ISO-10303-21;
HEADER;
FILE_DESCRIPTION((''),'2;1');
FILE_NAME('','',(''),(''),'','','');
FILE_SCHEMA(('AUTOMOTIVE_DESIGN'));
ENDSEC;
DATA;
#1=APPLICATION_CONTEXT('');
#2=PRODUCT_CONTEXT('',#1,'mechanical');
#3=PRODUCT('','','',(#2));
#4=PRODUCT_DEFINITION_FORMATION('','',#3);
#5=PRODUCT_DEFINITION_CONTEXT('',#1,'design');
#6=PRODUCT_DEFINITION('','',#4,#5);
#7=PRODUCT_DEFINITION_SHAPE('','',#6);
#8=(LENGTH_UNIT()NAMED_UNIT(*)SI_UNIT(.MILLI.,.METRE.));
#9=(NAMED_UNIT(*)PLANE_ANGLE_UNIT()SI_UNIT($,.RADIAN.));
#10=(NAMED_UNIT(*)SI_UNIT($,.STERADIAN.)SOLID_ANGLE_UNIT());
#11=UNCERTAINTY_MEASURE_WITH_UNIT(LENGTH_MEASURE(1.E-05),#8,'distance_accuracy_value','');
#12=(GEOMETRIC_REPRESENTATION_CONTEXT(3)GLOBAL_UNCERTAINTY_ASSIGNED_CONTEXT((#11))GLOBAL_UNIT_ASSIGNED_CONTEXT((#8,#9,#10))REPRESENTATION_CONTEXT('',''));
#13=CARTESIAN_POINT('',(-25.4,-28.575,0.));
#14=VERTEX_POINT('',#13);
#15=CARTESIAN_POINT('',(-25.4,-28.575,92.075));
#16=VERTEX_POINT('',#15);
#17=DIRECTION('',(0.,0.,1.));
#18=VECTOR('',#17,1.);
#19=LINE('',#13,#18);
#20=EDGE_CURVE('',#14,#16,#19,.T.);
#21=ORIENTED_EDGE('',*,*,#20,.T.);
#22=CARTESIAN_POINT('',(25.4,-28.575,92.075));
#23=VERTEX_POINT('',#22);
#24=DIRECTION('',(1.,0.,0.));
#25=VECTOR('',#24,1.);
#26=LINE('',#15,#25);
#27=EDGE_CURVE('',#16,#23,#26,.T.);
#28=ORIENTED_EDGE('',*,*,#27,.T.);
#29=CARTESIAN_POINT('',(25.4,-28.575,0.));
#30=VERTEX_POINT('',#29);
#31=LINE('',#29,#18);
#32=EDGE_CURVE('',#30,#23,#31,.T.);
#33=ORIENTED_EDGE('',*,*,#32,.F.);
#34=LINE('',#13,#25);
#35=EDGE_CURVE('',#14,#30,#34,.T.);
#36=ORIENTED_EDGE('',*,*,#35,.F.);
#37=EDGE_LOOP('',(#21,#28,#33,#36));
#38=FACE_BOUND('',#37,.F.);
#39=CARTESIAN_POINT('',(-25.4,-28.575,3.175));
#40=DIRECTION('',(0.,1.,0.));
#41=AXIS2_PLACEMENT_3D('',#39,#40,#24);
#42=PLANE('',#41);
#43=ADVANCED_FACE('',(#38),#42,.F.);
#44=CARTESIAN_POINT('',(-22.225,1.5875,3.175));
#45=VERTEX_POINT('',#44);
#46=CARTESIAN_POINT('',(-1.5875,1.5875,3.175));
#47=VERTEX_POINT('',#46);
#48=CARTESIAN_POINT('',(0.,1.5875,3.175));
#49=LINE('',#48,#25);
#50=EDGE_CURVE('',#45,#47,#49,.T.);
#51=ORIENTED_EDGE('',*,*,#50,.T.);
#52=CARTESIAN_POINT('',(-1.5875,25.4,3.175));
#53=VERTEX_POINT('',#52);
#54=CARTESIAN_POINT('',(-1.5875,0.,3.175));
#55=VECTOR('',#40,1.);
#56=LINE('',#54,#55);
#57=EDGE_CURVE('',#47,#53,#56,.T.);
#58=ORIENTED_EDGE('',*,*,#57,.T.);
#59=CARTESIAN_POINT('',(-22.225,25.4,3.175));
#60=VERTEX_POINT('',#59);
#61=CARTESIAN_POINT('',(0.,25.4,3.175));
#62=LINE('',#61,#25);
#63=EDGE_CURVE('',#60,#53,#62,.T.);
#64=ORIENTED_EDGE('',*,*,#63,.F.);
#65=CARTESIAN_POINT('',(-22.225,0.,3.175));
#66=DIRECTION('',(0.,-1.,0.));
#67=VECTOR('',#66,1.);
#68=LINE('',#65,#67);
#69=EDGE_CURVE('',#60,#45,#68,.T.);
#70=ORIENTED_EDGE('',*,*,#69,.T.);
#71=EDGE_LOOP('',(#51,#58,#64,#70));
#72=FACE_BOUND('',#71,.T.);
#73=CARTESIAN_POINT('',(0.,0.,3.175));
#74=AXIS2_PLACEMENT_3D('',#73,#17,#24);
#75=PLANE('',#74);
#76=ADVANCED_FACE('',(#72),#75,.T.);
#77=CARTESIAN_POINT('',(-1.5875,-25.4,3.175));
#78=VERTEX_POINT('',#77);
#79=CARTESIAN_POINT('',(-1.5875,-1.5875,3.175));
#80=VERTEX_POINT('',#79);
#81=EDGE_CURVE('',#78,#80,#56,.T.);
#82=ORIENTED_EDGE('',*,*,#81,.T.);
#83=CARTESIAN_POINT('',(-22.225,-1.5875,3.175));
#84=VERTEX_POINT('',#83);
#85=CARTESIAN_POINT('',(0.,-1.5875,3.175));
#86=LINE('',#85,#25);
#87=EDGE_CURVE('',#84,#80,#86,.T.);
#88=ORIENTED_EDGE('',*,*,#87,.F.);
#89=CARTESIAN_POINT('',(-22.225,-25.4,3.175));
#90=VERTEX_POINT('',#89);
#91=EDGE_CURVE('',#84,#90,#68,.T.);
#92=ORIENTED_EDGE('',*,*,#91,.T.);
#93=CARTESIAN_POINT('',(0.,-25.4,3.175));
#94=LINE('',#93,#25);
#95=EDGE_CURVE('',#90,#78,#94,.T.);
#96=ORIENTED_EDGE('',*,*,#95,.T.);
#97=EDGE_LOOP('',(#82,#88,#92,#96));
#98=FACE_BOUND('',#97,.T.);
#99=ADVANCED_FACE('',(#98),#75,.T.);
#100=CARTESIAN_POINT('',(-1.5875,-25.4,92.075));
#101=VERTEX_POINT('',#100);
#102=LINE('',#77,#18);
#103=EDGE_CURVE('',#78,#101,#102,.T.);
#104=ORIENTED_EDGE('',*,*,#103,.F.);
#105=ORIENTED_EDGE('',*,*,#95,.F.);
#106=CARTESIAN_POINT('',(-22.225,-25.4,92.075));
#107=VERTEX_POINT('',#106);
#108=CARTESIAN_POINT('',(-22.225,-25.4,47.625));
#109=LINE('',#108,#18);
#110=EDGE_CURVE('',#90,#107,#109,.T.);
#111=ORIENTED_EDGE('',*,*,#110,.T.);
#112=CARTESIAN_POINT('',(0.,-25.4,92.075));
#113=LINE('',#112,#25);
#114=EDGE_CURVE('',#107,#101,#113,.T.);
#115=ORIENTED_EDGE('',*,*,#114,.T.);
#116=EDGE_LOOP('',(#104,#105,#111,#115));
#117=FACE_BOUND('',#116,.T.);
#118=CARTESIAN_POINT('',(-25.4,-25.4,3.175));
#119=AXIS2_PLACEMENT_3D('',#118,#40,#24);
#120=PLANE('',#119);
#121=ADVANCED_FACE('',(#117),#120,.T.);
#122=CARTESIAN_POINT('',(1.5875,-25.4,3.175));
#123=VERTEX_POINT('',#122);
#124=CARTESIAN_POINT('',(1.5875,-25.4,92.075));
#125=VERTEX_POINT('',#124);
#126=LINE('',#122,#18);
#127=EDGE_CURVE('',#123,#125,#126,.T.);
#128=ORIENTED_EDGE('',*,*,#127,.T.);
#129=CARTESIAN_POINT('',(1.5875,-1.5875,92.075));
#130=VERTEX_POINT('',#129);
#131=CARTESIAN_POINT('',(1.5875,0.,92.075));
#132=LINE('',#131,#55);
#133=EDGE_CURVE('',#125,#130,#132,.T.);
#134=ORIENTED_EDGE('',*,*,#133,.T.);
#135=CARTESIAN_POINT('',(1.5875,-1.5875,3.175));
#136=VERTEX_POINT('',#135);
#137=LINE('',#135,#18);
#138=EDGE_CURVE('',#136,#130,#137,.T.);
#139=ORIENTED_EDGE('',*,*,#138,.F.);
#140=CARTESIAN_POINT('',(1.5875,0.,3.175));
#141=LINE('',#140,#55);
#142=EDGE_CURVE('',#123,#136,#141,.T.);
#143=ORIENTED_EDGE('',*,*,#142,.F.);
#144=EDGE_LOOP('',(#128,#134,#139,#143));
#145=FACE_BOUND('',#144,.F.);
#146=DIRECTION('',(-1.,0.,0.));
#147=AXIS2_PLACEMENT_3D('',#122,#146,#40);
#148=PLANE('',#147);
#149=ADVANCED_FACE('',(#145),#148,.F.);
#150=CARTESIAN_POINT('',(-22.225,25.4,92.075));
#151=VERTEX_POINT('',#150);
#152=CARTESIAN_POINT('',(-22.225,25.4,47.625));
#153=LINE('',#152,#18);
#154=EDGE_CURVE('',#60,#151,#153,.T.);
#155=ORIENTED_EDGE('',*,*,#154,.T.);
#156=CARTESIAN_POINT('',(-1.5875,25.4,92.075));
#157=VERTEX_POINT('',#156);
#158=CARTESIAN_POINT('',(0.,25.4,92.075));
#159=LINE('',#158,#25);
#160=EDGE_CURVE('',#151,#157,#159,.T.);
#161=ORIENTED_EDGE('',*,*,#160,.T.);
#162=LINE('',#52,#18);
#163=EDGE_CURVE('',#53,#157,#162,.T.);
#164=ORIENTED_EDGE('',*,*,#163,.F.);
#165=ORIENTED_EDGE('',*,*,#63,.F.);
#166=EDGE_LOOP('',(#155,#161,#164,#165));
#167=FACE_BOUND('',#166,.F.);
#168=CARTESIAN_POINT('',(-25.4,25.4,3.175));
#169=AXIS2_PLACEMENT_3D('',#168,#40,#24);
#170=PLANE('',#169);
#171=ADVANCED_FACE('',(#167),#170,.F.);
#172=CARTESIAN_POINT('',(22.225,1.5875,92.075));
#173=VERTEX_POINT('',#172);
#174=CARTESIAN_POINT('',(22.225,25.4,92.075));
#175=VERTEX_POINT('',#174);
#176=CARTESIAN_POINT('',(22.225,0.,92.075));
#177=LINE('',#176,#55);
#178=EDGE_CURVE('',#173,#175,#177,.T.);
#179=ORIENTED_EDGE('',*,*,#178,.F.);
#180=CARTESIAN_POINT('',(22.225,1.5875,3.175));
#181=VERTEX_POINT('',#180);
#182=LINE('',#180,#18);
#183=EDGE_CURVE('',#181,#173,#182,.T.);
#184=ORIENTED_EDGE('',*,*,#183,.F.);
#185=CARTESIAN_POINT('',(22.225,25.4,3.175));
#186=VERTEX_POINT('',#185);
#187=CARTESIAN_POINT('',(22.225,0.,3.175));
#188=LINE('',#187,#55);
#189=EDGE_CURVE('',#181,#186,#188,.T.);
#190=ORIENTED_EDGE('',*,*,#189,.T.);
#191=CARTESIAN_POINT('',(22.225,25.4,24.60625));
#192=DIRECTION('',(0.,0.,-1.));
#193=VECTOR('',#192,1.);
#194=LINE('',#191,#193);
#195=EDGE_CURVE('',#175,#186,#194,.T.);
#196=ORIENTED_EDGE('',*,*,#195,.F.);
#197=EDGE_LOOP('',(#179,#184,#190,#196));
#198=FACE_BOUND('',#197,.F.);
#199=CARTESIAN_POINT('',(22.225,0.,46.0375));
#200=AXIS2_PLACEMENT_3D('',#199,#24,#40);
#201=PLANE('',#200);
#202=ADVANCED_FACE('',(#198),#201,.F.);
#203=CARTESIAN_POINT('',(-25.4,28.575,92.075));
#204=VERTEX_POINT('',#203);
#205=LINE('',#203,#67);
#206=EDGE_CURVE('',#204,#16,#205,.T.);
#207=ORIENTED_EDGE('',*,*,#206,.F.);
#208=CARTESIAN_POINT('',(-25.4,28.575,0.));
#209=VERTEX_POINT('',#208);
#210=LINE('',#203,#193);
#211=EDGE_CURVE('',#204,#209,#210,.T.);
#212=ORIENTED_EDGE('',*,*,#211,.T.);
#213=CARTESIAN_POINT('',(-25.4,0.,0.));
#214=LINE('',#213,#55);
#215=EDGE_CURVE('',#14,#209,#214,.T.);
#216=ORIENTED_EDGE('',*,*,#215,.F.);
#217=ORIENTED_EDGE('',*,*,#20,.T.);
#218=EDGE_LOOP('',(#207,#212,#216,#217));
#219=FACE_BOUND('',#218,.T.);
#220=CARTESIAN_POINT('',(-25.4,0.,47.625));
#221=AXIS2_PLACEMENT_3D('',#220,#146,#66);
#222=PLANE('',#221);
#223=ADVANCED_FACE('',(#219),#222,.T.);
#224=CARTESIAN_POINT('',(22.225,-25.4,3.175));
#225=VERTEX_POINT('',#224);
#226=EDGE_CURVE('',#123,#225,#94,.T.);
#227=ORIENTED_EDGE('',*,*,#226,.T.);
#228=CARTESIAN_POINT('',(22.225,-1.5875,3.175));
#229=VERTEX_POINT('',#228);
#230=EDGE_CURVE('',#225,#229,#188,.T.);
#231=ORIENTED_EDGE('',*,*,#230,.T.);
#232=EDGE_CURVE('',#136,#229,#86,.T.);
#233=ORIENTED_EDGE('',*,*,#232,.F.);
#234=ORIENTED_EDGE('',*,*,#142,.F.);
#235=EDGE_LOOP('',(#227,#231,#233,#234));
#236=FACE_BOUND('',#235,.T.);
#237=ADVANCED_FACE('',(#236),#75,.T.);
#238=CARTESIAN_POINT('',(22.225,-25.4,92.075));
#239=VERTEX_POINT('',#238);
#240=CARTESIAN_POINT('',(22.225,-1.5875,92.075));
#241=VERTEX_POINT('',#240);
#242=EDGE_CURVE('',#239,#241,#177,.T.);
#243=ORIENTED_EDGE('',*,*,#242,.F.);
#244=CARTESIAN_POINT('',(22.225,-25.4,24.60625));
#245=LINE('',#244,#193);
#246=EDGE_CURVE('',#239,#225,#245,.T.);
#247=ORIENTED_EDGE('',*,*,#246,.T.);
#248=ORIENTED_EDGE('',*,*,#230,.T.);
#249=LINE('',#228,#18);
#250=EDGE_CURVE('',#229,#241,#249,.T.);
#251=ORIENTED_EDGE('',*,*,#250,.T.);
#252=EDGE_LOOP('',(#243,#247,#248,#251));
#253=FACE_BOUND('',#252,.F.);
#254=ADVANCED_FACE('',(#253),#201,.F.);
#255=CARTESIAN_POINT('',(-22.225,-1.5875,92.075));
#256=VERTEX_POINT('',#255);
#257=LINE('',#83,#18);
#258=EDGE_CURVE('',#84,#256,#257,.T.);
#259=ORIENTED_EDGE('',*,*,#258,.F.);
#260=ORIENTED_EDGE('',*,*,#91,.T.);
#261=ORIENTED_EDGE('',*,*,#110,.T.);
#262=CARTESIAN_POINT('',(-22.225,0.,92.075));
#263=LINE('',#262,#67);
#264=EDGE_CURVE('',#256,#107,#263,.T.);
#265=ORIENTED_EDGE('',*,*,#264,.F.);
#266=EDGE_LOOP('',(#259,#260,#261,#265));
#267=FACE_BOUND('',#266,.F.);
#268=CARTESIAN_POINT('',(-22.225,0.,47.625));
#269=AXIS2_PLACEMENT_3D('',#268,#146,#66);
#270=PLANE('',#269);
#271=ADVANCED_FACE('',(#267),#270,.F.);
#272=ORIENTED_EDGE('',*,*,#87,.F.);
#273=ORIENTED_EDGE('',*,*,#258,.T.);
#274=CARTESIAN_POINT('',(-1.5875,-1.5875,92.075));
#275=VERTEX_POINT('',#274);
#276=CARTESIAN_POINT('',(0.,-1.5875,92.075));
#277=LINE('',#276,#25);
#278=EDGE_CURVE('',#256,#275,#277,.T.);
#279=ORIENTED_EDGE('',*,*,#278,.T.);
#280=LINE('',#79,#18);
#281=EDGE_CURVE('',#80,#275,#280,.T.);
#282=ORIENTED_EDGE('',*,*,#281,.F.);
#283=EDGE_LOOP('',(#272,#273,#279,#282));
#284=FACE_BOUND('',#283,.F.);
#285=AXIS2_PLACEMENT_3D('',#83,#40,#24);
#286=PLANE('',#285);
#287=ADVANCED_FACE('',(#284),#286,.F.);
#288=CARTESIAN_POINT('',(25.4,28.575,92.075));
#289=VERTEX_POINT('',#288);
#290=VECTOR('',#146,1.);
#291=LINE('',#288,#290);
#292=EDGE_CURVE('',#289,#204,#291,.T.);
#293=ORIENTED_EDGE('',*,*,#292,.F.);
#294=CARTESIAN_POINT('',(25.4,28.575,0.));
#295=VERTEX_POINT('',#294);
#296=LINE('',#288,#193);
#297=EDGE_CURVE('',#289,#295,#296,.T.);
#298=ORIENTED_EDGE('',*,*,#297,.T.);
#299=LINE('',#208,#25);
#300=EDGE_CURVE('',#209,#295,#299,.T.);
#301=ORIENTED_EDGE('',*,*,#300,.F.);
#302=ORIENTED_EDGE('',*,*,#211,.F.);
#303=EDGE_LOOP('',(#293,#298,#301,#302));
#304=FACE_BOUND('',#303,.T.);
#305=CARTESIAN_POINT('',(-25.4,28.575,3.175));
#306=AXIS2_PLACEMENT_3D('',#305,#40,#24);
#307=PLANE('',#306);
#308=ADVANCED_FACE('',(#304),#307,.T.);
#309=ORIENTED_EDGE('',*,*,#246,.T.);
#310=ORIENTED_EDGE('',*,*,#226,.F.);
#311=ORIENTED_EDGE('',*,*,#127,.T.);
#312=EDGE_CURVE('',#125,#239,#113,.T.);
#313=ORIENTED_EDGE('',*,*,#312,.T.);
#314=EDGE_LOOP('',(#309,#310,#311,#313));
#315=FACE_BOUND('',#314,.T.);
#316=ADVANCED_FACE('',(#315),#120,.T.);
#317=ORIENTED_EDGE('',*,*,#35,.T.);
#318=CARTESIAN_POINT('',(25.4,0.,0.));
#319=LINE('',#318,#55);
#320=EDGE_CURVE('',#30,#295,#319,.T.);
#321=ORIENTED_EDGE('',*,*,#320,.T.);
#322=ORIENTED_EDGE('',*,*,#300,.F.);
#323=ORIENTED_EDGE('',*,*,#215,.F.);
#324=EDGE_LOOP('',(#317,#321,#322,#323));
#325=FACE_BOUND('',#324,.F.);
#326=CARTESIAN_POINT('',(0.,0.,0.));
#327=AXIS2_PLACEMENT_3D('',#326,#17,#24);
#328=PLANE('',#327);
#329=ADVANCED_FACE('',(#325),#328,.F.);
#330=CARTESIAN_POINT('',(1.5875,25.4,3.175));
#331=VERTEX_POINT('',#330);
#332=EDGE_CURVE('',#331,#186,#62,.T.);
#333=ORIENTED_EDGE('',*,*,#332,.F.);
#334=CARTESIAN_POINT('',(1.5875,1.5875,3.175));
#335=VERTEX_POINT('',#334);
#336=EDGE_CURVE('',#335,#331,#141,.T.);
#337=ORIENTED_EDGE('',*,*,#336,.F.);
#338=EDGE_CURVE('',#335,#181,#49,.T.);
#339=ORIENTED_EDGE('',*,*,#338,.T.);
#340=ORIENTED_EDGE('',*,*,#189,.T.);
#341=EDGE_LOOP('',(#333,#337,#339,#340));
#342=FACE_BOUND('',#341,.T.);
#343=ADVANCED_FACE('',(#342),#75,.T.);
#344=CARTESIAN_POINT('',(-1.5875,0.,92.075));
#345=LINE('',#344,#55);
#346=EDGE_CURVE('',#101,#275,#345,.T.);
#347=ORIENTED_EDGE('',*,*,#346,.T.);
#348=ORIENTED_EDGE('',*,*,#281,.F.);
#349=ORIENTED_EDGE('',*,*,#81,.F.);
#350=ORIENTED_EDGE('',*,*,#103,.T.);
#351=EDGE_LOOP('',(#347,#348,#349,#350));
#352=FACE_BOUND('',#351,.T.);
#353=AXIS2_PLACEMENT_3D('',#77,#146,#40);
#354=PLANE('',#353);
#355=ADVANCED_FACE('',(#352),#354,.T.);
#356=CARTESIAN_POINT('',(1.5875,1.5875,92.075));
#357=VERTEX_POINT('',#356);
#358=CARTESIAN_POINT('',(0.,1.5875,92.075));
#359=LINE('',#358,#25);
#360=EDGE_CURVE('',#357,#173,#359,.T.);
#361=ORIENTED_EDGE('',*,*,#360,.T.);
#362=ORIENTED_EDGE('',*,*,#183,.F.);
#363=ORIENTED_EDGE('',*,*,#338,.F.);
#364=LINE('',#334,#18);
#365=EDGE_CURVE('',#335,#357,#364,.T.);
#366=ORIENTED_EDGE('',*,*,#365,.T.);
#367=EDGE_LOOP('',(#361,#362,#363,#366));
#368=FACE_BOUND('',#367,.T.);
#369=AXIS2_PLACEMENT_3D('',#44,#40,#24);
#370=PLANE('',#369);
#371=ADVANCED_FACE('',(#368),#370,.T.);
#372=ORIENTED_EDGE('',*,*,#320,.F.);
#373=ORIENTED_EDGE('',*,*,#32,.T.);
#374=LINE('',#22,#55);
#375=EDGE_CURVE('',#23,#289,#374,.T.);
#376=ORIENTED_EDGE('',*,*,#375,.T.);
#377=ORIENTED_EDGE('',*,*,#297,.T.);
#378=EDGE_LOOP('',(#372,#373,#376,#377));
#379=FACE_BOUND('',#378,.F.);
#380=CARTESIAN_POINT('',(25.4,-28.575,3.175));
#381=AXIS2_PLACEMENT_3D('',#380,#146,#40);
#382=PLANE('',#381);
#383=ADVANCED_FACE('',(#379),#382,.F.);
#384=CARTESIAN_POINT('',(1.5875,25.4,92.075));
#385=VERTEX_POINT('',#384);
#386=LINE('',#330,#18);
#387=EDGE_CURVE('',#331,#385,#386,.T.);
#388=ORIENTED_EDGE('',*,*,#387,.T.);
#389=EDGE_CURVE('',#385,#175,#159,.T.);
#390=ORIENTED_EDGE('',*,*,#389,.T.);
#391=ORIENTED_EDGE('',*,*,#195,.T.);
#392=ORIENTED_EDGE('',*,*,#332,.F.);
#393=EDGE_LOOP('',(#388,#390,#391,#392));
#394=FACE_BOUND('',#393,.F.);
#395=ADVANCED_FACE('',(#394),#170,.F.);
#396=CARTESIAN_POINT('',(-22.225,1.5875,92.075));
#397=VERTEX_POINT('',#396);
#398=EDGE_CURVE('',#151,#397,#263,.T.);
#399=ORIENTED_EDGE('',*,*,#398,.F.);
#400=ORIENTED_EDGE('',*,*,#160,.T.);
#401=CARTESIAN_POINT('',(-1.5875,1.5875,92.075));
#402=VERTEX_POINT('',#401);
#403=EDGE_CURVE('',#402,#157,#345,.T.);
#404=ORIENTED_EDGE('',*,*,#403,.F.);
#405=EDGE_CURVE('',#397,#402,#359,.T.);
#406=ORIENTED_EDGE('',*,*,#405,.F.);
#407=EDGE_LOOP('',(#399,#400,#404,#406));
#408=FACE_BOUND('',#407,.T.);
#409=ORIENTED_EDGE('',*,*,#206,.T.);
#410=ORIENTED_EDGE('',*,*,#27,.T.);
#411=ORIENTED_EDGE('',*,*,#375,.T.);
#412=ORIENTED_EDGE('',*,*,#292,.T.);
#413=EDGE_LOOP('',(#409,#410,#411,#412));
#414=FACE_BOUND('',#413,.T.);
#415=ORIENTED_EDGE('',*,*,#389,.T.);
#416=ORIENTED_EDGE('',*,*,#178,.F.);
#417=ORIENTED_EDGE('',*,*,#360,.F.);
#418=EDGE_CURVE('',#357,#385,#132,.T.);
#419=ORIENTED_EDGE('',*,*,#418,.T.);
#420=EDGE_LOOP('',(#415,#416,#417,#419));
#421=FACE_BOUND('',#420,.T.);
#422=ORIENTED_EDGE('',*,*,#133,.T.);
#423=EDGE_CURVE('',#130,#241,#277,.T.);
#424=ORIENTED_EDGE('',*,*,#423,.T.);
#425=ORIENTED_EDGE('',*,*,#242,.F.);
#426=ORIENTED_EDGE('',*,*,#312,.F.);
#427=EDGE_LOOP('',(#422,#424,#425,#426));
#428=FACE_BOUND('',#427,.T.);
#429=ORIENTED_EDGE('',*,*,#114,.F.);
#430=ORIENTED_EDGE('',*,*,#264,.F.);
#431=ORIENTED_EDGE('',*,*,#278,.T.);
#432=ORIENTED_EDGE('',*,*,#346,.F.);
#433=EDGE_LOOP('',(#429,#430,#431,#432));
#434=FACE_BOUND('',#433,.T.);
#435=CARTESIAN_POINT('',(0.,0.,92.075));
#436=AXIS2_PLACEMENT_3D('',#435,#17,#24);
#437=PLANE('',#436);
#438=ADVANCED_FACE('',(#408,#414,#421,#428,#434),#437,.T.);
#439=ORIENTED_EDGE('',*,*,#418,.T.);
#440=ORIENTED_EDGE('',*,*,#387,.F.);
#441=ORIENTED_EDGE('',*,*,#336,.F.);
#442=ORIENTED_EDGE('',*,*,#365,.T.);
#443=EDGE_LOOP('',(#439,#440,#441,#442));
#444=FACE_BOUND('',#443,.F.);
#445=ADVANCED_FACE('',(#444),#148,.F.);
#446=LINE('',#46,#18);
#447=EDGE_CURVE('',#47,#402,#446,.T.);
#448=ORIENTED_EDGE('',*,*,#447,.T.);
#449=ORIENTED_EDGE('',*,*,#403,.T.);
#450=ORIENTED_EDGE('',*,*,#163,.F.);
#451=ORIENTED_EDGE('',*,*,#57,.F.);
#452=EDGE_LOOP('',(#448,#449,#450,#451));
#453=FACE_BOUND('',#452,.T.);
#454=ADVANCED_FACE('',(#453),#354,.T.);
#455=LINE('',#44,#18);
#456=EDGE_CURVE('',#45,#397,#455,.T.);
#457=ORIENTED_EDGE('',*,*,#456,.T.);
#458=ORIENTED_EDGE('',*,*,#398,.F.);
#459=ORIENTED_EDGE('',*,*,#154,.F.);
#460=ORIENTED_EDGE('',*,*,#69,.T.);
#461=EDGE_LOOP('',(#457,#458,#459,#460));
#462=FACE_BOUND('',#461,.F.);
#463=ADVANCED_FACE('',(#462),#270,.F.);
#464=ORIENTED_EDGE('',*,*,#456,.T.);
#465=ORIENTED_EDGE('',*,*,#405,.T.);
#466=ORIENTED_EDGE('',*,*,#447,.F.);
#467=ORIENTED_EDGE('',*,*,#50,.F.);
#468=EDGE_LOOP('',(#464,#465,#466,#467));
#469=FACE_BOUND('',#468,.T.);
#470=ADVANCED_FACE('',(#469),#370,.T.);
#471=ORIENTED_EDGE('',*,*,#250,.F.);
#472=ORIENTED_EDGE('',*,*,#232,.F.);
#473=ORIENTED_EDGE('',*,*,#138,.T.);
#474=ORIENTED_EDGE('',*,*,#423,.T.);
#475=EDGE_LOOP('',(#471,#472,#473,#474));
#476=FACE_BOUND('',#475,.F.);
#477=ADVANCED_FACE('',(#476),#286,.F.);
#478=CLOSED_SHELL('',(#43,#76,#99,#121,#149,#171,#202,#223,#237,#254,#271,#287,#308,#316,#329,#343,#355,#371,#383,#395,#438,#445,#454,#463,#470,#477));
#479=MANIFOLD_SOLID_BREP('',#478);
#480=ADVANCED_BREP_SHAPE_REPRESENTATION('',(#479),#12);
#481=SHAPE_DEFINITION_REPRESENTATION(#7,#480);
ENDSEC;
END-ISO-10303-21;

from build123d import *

# Parameters (mm, degrees)
F0_W      = 50.8
F0_H      = 57.15
F1_DEPTH  = 3.175
F2_W      = 50.8
F2_H      = 3.175
F3_DEPTH  = 88.9
F4_W      = 50.8
F4_H      = 3.175
F5_DEPTH  = 88.9
F6_W      = 50.8
F6_H      = 88.9
F7_DEPTH  = 3.175
F8_W      = 57.15
F8_H      = 92.075
F9_DEPTH  = 3.175
F11_W     = 44.45
F11_H     = 3.175
F12_DEPTH = 88.9
F10_W     = 3.175
F10_H     = 50.8
F13_DEPTH = 88.9


with BuildPart() as f1:
    # F0 (on Top) → F1 (new body)
    with BuildSketch(Plane.XY):
        Rectangle(F0_W, F0_H)
    extrude(amount=F1_DEPTH)

    # F2 (on face) → F3 (join)
    with BuildSketch(Plane.XY.offset(3.175)):
        with Locations((0, 26.9875)):
            Rectangle(F2_W, F2_H)
    extrude(amount=F3_DEPTH)

    # F4 (on face) → F5 (join)
    with BuildSketch(Plane.XY.offset(3.175)):
        with Locations((0, -26.9875)):
            Rectangle(F4_W, F4_H)
    extrude(amount=F5_DEPTH)

    # F6 (on face) → F7 (join)
    with BuildSketch(Plane(origin=(-25.4, 0, 0), x_dir=(0, -1, 0), z_dir=(-1, 0, 0))):
        with Locations((0, 47.625)):
            Rectangle(F6_W, F6_H)
    extrude(amount=-F7_DEPTH)

    # F8 (on face) → F9 (join)
    with BuildSketch(Plane.YZ.offset(25.4)):
        with Locations((0, 46.0375)):
            Rectangle(F8_W, F8_H)
    extrude(amount=-F9_DEPTH)

    # F11 (on face) → F12 (join)
    with BuildSketch(Plane.XY.offset(3.175)):
        Rectangle(F11_W, F11_H)
    extrude(amount=F12_DEPTH)

    # F10 (on face) → F13 (join)
    with BuildSketch(Plane.XY.offset(3.175)):
        Rectangle(F10_W, F10_H)
    extrude(amount=F13_DEPTH)


solid = f1.part
